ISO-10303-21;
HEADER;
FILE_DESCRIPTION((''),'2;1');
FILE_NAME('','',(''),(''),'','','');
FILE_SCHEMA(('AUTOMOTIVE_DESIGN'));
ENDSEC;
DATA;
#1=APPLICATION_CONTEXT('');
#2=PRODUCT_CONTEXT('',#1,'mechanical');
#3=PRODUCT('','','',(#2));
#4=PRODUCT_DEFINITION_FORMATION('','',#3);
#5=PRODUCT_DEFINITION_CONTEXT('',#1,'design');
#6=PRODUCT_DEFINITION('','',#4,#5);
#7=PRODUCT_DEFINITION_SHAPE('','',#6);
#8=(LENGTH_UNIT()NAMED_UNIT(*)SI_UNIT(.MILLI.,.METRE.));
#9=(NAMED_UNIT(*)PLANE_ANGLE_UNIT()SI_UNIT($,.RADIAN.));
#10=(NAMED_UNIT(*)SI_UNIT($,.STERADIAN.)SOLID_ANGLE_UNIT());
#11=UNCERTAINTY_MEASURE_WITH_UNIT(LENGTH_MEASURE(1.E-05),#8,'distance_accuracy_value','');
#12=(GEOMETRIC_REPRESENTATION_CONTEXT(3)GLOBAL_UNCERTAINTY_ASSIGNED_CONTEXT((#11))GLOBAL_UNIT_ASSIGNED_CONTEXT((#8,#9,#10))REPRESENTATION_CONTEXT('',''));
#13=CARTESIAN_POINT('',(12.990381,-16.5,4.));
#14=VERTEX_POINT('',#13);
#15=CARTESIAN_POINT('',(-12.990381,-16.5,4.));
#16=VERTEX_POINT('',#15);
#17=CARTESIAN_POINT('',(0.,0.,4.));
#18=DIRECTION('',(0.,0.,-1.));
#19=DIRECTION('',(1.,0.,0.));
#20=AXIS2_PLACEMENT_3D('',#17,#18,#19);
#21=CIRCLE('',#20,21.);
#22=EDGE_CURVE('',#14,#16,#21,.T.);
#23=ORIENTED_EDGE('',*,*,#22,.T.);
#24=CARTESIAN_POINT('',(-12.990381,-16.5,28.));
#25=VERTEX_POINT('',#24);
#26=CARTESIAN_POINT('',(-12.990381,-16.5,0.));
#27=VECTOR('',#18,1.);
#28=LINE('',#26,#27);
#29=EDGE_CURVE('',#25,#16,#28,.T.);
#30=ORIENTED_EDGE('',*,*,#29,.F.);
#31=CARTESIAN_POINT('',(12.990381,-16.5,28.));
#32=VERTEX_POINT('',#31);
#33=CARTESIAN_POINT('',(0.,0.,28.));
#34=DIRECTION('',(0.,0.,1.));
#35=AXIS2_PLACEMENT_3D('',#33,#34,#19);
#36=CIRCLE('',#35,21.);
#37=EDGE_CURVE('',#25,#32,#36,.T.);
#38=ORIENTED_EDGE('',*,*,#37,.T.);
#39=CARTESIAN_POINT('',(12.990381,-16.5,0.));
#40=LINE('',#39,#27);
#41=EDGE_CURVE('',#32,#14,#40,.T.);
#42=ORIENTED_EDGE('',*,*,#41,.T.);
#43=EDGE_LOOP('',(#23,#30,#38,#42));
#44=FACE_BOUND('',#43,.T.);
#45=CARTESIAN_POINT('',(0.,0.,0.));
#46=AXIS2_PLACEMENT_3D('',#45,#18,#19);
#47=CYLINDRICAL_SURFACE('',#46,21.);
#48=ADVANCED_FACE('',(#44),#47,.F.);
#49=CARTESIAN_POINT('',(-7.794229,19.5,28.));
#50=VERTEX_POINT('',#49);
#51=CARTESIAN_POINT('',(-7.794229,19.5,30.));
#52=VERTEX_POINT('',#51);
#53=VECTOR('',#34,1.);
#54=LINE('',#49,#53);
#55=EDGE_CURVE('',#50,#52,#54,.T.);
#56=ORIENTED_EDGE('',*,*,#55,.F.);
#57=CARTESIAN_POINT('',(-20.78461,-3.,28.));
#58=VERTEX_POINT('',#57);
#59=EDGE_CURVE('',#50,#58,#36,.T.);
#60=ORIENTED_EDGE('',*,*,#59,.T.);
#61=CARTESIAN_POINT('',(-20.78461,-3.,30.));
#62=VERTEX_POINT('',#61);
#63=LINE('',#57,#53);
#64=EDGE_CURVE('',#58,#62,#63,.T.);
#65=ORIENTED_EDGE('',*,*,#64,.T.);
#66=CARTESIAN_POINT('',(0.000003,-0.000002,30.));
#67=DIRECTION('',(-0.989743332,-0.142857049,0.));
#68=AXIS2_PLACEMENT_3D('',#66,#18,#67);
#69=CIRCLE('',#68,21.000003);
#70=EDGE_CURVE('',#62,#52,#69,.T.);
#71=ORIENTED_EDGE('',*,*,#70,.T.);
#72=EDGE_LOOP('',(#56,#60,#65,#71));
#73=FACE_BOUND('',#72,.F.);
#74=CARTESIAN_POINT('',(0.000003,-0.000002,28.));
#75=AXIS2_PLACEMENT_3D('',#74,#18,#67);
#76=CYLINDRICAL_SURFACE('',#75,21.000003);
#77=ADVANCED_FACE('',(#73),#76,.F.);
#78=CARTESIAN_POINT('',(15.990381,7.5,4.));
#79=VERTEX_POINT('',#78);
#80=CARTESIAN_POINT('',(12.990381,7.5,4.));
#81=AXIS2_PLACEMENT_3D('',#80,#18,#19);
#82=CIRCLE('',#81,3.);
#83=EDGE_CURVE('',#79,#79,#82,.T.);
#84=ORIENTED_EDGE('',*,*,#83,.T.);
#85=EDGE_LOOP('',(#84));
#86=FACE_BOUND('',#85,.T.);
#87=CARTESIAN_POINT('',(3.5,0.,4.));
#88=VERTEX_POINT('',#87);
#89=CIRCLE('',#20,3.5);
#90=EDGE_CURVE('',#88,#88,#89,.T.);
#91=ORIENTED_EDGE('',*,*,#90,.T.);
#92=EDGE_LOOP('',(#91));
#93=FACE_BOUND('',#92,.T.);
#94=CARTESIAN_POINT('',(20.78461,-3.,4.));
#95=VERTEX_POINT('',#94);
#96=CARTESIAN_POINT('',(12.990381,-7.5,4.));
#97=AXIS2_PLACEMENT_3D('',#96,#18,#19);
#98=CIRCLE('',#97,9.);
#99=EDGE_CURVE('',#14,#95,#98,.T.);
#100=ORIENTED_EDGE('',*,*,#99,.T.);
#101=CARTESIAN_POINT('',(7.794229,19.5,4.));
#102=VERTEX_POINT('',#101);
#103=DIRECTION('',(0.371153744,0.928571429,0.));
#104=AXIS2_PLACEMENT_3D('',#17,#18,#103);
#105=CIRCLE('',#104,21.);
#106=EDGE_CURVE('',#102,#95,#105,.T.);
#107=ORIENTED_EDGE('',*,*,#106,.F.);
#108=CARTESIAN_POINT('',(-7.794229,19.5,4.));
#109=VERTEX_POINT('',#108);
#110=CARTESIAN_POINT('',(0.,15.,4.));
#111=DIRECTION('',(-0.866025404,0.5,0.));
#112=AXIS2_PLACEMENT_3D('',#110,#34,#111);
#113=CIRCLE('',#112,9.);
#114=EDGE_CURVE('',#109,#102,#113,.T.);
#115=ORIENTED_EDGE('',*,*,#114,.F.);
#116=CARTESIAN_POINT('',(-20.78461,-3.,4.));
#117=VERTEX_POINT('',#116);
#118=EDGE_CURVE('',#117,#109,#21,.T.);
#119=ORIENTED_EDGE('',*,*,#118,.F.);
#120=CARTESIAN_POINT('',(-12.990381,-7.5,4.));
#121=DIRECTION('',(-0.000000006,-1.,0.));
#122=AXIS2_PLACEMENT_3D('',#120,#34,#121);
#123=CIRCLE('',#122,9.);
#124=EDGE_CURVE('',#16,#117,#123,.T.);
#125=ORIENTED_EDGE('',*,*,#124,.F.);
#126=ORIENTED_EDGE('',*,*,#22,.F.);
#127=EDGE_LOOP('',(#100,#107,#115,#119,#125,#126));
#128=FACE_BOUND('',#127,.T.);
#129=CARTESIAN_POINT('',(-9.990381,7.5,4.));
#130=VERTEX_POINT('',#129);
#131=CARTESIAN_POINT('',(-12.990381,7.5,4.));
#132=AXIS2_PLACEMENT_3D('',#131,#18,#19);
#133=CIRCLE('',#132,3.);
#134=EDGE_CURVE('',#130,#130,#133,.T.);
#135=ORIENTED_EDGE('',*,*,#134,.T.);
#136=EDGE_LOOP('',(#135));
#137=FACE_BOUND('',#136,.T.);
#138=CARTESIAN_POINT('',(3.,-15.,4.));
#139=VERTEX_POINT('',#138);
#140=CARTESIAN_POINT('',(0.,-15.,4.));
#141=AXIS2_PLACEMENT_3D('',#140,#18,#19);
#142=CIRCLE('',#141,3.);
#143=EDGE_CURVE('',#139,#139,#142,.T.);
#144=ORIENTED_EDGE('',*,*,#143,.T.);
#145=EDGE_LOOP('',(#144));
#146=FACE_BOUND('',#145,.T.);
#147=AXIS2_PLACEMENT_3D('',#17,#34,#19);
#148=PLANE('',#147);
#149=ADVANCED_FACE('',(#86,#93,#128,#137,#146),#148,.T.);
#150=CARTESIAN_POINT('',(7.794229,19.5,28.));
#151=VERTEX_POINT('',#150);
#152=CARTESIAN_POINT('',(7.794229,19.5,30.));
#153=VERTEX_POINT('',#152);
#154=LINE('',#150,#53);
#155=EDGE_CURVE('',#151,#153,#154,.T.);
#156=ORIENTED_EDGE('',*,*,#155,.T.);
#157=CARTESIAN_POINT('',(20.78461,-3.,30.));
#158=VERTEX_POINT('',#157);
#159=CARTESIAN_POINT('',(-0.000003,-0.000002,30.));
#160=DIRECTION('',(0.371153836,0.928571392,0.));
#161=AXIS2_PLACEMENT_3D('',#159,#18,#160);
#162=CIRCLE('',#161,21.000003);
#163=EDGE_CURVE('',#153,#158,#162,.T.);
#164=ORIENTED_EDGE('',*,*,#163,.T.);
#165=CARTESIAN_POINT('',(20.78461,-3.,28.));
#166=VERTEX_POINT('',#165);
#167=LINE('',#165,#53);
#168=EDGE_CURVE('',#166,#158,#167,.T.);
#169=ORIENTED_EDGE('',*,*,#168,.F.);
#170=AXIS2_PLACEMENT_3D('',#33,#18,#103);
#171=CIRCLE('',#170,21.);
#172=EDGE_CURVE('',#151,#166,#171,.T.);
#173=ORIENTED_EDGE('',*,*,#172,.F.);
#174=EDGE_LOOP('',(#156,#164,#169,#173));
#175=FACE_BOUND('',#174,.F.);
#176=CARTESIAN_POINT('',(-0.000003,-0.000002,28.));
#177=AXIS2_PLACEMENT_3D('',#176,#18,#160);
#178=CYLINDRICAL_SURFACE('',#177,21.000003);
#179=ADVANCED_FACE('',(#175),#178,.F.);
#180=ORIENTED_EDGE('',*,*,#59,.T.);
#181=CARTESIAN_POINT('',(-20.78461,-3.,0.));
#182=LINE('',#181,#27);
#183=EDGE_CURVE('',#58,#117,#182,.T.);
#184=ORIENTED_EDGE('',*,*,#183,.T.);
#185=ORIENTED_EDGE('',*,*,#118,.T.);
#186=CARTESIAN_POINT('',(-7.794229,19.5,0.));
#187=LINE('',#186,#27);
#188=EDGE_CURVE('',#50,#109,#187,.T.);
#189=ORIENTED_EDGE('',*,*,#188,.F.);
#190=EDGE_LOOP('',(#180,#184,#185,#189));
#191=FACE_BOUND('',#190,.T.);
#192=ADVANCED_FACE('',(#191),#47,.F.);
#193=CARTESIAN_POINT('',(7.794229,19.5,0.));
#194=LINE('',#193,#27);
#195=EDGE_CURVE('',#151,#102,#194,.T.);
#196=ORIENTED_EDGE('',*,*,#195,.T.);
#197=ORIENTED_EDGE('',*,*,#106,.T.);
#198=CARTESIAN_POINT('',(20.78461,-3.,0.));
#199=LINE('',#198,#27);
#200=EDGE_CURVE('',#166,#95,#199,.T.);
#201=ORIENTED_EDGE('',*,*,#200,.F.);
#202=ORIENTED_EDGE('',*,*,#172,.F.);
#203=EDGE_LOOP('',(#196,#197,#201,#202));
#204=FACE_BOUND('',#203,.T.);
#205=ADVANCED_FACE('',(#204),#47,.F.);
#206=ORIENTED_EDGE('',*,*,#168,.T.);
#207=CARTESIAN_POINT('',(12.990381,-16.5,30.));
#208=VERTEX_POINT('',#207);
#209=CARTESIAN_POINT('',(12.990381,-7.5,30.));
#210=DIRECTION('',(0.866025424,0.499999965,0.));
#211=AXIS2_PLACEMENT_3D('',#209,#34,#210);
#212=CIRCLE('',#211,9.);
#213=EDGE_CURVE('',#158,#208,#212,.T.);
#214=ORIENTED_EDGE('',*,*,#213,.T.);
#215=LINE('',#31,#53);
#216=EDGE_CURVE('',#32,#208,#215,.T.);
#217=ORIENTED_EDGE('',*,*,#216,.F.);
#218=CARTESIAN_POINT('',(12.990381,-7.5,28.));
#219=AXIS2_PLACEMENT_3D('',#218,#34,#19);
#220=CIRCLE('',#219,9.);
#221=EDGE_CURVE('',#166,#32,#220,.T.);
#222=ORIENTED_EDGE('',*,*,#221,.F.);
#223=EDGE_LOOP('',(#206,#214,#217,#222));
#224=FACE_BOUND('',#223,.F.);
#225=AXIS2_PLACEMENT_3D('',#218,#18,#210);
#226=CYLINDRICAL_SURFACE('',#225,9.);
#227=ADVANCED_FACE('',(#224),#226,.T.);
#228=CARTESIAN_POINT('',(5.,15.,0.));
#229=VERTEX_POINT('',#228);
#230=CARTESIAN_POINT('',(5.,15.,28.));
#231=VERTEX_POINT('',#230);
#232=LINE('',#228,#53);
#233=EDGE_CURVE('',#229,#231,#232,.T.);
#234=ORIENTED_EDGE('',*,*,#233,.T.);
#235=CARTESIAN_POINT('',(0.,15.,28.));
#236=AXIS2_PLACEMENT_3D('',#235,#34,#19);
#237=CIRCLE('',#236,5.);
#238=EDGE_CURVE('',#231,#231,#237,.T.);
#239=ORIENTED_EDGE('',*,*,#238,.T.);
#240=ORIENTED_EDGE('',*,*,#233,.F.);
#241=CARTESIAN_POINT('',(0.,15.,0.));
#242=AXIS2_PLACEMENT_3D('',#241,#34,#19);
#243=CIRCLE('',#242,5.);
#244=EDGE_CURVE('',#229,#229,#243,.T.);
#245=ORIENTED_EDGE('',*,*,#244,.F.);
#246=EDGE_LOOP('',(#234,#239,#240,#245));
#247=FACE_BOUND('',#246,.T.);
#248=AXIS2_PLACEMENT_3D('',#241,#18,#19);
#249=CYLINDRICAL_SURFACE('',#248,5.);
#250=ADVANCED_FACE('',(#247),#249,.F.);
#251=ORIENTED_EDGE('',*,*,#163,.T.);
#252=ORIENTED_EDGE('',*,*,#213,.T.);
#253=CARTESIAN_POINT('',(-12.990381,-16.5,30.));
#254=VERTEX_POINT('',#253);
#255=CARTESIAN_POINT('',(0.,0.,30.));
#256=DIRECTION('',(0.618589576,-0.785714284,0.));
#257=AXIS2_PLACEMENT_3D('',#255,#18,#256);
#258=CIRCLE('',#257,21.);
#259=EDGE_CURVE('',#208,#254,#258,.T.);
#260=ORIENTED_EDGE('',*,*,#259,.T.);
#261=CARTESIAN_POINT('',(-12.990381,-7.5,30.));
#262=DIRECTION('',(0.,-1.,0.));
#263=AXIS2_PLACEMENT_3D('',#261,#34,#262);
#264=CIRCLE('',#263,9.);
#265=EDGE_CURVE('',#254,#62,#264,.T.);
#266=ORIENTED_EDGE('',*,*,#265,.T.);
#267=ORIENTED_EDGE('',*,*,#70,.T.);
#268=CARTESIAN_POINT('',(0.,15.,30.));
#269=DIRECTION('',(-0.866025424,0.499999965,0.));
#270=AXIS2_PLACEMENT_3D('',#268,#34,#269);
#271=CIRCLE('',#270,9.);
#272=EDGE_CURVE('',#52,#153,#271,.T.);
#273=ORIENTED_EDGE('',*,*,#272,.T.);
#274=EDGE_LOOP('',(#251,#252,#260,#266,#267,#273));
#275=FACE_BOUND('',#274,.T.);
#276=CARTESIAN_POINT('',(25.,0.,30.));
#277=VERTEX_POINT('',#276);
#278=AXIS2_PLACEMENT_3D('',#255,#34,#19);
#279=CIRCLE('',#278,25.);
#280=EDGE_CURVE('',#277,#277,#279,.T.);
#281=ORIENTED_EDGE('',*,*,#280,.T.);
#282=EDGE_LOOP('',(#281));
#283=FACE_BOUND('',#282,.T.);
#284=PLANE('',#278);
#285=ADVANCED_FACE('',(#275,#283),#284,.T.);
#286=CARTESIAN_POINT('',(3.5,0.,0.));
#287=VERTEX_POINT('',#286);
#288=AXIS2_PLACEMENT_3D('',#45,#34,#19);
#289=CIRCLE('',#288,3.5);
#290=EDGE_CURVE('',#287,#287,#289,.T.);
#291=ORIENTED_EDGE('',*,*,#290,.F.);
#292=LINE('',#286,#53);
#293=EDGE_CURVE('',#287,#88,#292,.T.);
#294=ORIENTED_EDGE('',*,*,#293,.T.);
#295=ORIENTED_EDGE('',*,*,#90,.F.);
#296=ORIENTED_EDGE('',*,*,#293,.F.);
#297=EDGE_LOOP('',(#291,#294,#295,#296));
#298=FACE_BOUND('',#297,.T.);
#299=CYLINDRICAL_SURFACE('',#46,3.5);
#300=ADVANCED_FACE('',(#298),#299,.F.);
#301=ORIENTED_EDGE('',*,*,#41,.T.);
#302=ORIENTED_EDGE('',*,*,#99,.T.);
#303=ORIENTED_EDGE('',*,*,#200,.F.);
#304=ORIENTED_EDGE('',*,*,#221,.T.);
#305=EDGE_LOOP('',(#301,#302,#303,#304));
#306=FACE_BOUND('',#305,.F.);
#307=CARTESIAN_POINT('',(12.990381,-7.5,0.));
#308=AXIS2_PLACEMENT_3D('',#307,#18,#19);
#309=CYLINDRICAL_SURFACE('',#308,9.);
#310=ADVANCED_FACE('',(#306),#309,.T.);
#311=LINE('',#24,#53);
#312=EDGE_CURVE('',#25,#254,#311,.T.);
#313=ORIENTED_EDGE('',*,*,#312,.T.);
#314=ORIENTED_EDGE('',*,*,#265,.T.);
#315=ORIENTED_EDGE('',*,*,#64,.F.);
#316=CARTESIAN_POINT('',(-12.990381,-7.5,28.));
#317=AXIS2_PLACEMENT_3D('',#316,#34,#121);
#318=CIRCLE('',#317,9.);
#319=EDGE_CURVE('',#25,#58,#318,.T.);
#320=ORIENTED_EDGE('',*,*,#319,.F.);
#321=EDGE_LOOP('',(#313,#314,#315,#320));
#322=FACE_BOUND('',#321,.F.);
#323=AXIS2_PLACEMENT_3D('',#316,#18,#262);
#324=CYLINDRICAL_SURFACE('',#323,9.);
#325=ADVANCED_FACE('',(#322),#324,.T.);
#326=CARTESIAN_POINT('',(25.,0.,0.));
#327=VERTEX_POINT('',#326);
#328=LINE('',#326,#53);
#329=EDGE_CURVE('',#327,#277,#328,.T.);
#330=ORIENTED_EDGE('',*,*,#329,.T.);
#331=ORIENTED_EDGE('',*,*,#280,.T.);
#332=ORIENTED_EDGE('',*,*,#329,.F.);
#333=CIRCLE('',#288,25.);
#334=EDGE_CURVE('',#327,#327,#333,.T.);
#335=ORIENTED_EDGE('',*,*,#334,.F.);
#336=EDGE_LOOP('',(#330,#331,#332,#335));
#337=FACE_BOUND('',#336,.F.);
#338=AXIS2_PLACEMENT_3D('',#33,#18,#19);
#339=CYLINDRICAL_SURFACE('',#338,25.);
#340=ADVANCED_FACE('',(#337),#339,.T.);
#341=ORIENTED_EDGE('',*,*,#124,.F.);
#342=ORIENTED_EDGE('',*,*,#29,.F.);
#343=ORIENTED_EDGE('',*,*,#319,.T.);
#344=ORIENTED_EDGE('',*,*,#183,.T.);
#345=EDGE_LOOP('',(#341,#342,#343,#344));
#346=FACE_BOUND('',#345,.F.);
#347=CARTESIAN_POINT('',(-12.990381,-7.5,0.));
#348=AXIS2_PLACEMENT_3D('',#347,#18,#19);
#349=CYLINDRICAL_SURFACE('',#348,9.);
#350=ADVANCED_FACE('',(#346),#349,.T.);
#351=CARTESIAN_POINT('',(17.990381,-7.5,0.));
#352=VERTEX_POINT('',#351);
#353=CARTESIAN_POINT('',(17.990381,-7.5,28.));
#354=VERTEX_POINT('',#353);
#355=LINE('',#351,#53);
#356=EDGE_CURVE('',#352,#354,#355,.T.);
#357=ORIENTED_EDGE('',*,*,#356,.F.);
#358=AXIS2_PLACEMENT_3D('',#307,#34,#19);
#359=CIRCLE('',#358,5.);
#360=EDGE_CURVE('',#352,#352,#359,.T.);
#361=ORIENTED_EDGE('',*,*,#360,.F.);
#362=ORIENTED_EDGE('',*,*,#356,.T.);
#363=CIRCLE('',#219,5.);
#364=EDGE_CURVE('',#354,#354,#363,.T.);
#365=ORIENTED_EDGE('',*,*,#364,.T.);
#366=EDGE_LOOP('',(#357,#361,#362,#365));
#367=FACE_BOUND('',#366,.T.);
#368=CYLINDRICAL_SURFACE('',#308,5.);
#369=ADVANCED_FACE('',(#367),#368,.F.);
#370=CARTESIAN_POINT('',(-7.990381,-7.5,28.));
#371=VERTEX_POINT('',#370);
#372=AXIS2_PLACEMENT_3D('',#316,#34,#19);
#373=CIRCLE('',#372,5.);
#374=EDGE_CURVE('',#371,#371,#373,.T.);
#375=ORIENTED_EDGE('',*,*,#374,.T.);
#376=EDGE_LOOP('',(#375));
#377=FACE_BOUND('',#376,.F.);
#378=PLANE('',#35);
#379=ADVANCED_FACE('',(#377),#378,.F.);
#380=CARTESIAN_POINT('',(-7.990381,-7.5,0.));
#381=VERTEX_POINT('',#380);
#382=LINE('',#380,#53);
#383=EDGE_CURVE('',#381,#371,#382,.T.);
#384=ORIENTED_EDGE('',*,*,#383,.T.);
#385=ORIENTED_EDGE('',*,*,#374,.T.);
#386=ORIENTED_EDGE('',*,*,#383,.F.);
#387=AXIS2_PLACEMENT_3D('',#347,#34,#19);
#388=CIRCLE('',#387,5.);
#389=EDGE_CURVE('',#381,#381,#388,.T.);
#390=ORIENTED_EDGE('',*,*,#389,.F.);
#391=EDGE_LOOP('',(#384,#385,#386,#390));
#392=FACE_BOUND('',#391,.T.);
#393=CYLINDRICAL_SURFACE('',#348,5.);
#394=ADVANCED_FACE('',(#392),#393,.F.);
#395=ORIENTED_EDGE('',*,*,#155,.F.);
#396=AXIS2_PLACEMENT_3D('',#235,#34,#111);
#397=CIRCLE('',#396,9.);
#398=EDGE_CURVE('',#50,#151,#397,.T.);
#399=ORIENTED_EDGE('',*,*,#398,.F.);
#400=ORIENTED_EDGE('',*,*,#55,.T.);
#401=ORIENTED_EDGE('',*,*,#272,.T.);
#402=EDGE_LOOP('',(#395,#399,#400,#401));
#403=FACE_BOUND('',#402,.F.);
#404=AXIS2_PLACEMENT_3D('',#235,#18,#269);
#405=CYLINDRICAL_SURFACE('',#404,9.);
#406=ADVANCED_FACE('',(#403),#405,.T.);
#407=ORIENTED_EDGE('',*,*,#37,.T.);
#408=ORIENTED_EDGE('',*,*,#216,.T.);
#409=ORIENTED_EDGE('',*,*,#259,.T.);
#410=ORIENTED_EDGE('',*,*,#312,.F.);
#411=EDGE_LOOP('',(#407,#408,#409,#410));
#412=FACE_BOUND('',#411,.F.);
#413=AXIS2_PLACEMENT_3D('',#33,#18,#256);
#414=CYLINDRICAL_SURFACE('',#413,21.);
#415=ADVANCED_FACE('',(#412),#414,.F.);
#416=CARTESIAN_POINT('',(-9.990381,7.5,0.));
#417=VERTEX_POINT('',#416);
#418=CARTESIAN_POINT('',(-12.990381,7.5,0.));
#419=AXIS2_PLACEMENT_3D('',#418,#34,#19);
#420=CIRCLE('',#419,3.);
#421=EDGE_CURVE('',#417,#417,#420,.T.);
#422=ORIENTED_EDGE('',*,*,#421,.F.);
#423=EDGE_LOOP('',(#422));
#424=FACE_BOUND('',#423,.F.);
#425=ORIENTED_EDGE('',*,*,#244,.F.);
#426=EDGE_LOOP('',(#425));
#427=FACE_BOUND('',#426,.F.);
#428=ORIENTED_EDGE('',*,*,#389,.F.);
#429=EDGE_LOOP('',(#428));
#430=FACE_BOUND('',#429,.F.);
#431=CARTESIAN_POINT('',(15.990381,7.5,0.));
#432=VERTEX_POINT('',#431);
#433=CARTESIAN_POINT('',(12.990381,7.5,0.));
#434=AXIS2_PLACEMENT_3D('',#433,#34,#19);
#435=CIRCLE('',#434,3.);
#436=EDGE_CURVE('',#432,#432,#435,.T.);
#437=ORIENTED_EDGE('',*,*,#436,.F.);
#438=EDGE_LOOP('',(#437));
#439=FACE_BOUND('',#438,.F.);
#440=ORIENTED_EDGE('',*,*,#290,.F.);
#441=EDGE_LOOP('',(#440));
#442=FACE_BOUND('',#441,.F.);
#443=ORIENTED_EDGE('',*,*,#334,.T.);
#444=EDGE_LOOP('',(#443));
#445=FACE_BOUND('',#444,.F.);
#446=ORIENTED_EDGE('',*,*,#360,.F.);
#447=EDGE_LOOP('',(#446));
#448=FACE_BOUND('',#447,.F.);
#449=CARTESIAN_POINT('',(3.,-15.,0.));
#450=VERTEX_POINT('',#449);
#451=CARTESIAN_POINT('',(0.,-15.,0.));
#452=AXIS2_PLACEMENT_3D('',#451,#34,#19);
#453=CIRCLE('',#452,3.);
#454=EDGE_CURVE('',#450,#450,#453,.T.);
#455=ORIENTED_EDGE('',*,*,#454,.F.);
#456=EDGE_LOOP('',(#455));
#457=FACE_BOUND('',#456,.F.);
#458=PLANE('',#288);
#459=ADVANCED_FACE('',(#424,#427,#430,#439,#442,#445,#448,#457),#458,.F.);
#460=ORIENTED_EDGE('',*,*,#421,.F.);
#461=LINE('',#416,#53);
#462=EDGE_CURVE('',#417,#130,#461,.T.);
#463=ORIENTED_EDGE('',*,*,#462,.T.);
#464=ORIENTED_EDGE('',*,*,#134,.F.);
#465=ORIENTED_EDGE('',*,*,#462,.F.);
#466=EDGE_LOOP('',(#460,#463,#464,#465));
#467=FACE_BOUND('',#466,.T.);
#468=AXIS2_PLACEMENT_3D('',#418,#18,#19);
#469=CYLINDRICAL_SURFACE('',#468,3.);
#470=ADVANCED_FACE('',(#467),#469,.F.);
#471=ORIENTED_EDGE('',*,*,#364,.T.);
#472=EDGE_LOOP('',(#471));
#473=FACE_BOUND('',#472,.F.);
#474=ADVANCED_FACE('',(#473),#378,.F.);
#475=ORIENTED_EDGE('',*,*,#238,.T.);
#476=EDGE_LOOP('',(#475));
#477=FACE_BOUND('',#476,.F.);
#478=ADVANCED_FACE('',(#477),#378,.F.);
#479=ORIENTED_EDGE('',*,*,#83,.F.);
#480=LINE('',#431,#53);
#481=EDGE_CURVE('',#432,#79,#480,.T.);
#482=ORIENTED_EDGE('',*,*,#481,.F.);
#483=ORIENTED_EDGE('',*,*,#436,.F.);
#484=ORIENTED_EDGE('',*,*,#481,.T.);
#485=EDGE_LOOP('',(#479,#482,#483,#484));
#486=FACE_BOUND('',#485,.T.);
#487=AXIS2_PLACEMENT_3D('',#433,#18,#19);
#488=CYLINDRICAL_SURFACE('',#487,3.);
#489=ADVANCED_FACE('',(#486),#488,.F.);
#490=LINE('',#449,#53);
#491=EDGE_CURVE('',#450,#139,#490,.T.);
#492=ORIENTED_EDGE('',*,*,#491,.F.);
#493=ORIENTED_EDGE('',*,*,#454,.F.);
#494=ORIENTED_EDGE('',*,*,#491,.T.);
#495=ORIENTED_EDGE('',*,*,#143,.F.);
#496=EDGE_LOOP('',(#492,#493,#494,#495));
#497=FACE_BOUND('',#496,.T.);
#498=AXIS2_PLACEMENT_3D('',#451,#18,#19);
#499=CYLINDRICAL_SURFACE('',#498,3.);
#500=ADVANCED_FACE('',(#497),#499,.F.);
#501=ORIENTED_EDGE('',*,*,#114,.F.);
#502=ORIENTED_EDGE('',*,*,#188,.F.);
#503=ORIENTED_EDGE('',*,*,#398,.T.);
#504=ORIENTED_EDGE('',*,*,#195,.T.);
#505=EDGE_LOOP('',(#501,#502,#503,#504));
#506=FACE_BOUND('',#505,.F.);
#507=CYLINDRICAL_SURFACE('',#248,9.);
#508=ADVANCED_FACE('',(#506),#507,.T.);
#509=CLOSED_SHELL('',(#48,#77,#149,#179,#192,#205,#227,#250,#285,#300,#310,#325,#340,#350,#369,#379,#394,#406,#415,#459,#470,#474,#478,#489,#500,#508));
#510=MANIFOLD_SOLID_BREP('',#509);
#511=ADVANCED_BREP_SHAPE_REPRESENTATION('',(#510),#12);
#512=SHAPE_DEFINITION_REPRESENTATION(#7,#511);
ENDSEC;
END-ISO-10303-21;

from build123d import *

# Parameters (mm, degrees)
F0_R     = 25
F0_R_2   = 5
F0_R_3   = 3
F0_R_4   = 3.5
F1_DEPTH = 28
F2_T     = -4
F3_DEPTH = 25
F4_R     = 25
F5_DEPTH = 2


# Not quite as in the source:
# - a feature names something its author has since deleted; it is built from what else it names


with BuildPart() as f1:
    # F0 (on Top) → F1 (new body)
    with BuildSketch(Plane.XY):
        Circle(F0_R)
        with Locations((-12.990381, -7.5)):
            Circle(F0_R_2, mode=Mode.SUBTRACT)
        with Locations((0, -15)):
            Circle(F0_R_3, mode=Mode.SUBTRACT)
        with Locations((12.990381, -7.5)):
            Circle(F0_R_2, mode=Mode.SUBTRACT)
        with Locations((-12.990381, 7.5)):
            Circle(F0_R_3, mode=Mode.SUBTRACT)
        Circle(F0_R_4, mode=Mode.SUBTRACT)
        with Locations((12.990381, 7.5)):
            Circle(F0_R_3, mode=Mode.SUBTRACT)
        with Locations((0, 15)):
            Circle(F0_R_2, mode=Mode.SUBTRACT)
        Circle(F0_R_4)
        with Locations((-12.990381, 7.5)):
            Circle(F0_R_3)
        with Locations((12.990381, 7.5)):
            Circle(F0_R_3)
        with Locations((0, -15)):
            Circle(F0_R_3)
    extrude(amount=F1_DEPTH)

    # F2
    f2_openings = [f1.faces().sort_by_distance(p)[0] for p in [
        (0, 0, 28),
    ]]
    offset(amount=F2_T, openings=f2_openings)

    # F0 (on Top) → F3 (cut)
    with BuildSketch(Plane.XY):
        with Locations((-12.990381, 7.5)):
            Circle(F0_R_3)
        Circle(F0_R_4)
        with Locations((12.990381, 7.5)):
            Circle(F0_R_3)
        with Locations((0, -15)):
            Circle(F0_R_3)
    extrude(amount=F3_DEPTH, mode=Mode.SUBTRACT)

    # F4 (on face) → F5 (join)
    with BuildSketch(Plane.XY.offset(28)):
        Circle(F4_R)
        with BuildLine():
            ThreePointArc((-20.78461, -3), (-18.186533, 10.5), (-7.794229, 19.5))
            ThreePointArc((-7.794229, 19.5), (0, 6), (7.794229, 19.5))
            ThreePointArc((7.794229, 19.5), (18.186533, 10.5), (20.78461, -3))
            ThreePointArc((20.78461, -3), (5.196152, -3), (12.990381, -16.5))
            ThreePointArc((12.990381, -16.5), (0, -21), (-12.990381, -16.5))
            ThreePointArc((-12.990381, -16.5), (-5.196152, -3), (-20.78461, -3))
        make_face(mode=Mode.SUBTRACT)
    extrude(amount=F5_DEPTH)


solid = f1.part
